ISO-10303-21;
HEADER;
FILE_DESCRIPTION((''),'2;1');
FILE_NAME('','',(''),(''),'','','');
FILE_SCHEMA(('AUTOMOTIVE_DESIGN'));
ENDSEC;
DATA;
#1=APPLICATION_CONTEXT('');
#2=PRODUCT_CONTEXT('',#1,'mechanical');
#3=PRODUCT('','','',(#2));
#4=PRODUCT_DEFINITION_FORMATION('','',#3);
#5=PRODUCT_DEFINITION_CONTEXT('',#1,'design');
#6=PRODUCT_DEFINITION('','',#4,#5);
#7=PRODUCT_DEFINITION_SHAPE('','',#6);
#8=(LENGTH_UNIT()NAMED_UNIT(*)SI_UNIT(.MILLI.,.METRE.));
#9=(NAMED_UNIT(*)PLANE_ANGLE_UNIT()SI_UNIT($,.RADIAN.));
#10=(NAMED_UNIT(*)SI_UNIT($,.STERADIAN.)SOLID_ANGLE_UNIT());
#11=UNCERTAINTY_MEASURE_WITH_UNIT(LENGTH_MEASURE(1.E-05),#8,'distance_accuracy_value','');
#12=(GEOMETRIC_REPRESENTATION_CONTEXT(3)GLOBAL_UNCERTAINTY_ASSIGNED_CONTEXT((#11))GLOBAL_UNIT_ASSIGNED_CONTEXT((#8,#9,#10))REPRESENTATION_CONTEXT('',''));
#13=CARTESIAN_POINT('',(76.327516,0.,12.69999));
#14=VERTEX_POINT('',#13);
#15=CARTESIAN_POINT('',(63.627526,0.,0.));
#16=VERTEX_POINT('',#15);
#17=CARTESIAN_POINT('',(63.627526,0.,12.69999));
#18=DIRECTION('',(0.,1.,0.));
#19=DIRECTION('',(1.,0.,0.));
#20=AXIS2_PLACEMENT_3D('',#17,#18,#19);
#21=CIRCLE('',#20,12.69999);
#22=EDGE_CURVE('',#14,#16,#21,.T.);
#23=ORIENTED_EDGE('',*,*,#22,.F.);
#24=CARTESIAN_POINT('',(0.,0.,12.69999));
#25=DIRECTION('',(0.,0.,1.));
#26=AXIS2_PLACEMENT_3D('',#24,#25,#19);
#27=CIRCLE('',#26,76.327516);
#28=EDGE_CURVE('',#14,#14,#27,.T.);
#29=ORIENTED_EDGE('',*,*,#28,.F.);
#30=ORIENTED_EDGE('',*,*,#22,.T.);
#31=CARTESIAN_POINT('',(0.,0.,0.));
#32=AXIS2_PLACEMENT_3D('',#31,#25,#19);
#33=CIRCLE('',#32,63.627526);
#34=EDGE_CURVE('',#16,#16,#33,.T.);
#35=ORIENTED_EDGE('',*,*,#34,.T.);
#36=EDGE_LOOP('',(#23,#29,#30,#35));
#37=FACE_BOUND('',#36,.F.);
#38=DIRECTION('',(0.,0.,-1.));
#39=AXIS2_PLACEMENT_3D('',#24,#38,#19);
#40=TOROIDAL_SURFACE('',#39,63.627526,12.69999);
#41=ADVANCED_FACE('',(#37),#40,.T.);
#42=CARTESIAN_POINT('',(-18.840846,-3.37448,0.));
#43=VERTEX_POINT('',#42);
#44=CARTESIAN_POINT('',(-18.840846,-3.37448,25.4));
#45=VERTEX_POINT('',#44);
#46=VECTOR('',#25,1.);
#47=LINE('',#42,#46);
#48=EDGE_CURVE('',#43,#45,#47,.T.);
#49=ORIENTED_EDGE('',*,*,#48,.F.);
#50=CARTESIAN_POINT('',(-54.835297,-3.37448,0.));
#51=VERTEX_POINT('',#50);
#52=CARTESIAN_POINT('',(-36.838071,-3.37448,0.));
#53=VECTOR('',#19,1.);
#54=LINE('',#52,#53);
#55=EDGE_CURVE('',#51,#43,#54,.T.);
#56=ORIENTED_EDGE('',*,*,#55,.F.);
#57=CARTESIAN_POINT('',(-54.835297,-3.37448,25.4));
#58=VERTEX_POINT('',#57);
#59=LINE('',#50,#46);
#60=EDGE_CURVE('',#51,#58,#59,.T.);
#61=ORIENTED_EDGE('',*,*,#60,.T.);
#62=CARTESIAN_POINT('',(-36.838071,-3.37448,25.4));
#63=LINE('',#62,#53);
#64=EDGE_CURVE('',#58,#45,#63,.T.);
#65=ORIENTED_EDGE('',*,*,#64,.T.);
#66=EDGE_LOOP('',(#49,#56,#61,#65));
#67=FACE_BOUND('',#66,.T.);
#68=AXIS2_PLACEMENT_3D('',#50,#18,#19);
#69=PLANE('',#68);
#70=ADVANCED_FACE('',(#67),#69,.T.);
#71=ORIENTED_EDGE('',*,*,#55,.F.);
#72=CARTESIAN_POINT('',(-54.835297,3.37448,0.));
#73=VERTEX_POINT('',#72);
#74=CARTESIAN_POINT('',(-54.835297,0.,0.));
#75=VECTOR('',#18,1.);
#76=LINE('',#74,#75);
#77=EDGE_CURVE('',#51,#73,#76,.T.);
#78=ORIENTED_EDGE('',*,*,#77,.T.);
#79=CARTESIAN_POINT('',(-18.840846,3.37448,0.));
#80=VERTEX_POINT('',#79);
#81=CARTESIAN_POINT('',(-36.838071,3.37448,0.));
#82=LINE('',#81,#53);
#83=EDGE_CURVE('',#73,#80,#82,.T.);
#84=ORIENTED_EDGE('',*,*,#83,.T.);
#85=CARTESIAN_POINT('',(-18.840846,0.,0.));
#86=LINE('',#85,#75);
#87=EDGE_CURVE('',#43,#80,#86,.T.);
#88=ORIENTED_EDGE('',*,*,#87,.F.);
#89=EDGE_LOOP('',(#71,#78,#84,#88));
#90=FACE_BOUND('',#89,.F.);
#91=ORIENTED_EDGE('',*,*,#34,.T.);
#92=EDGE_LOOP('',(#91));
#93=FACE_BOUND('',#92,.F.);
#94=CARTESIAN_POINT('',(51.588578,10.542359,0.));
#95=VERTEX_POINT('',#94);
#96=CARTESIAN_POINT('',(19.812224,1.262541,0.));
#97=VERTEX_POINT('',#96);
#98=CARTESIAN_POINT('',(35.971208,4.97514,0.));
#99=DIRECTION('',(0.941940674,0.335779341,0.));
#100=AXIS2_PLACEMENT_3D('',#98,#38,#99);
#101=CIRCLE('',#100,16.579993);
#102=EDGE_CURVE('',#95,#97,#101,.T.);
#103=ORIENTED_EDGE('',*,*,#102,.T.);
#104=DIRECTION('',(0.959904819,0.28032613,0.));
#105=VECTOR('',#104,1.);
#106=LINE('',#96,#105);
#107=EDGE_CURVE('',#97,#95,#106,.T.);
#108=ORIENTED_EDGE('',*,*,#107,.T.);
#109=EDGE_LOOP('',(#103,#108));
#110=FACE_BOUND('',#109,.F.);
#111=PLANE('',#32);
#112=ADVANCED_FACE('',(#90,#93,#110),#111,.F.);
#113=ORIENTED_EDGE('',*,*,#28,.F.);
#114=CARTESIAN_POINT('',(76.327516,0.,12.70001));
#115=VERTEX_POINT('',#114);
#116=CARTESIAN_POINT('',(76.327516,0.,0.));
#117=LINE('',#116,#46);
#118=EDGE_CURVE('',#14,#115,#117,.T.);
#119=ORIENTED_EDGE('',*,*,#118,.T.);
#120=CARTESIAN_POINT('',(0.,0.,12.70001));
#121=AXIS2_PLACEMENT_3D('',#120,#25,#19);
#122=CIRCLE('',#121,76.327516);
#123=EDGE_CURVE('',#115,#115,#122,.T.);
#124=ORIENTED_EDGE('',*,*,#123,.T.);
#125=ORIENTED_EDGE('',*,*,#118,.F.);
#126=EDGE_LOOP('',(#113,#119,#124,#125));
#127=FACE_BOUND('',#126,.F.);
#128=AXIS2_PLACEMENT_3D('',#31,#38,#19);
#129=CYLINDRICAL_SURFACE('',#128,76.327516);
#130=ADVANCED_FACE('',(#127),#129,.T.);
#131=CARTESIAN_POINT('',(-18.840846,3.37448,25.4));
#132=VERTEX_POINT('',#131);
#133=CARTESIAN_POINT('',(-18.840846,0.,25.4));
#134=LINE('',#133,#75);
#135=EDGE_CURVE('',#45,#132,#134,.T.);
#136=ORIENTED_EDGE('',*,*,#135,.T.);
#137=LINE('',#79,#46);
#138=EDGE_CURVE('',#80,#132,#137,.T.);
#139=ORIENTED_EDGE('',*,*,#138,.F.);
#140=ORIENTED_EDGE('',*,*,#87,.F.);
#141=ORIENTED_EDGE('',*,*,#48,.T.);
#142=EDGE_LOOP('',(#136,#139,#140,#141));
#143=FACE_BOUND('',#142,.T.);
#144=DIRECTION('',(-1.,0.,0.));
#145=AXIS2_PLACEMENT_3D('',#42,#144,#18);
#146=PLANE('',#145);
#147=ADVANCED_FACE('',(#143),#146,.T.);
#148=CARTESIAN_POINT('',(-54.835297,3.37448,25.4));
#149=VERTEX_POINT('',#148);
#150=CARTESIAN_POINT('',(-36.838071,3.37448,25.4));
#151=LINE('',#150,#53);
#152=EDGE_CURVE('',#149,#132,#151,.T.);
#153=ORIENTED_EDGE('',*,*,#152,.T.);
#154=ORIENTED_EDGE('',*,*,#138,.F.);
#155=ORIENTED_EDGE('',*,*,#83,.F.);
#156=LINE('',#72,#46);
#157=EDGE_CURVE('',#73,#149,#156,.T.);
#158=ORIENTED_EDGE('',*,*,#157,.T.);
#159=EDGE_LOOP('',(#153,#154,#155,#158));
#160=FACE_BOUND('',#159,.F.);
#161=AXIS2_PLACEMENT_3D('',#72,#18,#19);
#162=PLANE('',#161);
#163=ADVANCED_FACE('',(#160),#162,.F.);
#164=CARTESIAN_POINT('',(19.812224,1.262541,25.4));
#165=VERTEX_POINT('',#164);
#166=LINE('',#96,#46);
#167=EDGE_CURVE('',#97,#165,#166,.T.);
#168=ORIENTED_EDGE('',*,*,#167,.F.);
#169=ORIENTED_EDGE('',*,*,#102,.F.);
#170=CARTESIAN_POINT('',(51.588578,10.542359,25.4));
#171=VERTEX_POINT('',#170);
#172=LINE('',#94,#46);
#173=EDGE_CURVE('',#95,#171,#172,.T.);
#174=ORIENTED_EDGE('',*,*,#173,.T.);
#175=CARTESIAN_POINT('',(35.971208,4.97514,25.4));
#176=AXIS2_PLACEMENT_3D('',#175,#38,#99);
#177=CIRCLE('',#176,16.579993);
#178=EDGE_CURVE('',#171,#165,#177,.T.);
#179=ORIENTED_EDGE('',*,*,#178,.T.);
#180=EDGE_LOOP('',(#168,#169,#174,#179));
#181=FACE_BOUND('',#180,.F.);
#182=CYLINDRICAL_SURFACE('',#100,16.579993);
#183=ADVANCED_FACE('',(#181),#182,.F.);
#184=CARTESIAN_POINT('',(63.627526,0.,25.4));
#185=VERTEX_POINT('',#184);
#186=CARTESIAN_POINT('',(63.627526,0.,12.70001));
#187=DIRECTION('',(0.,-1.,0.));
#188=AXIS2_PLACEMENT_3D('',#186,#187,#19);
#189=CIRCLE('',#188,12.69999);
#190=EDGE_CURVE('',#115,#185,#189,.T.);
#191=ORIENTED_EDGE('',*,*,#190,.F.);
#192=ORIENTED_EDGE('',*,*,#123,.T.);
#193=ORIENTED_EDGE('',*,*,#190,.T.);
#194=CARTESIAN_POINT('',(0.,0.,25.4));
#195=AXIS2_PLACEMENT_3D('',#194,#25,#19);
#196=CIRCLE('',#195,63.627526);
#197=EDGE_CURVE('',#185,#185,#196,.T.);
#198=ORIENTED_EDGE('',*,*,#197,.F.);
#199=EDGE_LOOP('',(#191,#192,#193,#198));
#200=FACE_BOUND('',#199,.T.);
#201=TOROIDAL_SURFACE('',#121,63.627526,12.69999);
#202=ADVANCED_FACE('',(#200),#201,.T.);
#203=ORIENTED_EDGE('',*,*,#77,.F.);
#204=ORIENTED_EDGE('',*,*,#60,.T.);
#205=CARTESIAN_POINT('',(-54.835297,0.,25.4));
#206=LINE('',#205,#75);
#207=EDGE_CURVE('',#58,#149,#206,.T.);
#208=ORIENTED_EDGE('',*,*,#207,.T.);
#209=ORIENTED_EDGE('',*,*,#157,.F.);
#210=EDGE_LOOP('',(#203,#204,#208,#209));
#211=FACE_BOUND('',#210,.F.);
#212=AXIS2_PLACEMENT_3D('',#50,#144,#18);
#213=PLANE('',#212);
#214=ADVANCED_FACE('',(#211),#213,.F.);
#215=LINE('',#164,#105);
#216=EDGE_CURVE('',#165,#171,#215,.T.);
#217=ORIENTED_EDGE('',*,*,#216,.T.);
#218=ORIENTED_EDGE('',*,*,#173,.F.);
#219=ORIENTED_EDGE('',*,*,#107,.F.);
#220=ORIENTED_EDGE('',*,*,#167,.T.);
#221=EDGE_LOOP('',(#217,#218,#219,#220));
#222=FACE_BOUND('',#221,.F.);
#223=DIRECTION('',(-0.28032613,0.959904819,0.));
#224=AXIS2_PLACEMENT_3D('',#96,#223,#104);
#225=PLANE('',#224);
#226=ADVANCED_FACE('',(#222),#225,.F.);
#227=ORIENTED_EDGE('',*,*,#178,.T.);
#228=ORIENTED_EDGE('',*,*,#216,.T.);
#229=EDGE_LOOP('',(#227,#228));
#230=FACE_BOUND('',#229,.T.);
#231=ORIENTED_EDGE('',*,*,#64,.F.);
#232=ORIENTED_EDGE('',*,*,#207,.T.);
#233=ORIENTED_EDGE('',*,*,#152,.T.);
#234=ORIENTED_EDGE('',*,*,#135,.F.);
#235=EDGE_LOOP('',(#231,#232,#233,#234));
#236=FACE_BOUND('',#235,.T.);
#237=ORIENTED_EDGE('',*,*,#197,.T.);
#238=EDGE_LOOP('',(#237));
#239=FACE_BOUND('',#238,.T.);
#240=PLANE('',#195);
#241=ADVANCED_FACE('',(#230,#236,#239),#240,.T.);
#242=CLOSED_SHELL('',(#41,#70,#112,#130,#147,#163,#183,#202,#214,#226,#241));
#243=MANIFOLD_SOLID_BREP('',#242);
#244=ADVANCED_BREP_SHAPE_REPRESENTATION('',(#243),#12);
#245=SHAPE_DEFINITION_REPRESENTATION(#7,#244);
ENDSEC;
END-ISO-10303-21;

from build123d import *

# Parameters (mm, degrees)
F0_R     = 76.327515992
F0_W     = 35.994451493
F0_H     = 6.7489598878
F1_DEPTH = 25.4
F2_R     = 12.69999


# Not quite as in the source:
# - a fillet or chamfer is up to 0.001 mm smaller than in the source, because OpenCascade refuses the exact size


with BuildPart() as f1:
    # F0 (on Top) → F1 (new body)
    with BuildSketch(Plane.XY):
        Circle(F0_R)
        with BuildLine():
            ThreePointArc((0, 71.7222208521), (50.7152687262, 50.7152687262), (71.7222208521, 0))
            ThreePointArc((71.7222208521, 0), (50.7152687263, -50.7152687262), (0, -71.7222208521))
            ThreePointArc((0, -71.7222208521), (-71.7222208521, 0), (0, 71.7222208521))
        make_face(mode=Mode.SUBTRACT)
        with BuildLine():
            ThreePointArc((0, -71.7222208521), (50.7152687263, -50.7152687262), (71.7222208521, 0))
            ThreePointArc((71.7222208521, 0), (50.7152687262, 50.7152687262), (0, 71.7222208521))
            Line((0, 71.7222208521), (0, -71.7222208521))
        make_face()
        with BuildLine():
            ThreePointArc((51.5885779704, 10.5423588198), (40.6190136024, -10.9400752111), (19.8122242535, 1.2625405457))
            Line((19.8122242535, 1.2625405457), (51.5885779704, 10.5423588198))
        make_face(mode=Mode.SUBTRACT)
        with BuildLine():
            Line((0, -71.7222208521), (0, 71.7222208521))
            ThreePointArc((0, 71.7222208521), (-71.7222208521, 0), (0, -71.7222208521))
        make_face()
        with Locations((-36.8380714208, 0)):
            Rectangle(F0_W, F0_H, mode=Mode.SUBTRACT)
    extrude(amount=F1_DEPTH)

    # F2 (radius 12.7 in the source; OpenCascade refuses exactly that, so slightly less here)
    f2_edges = [f1.edges().sort_by_distance(p)[0] for p in [
        (-76.327516, 0, 25.4),
        (-76.327516, 0, 0),
    ]]
    fillet(f2_edges, radius=F2_R)


solid = f1.part
